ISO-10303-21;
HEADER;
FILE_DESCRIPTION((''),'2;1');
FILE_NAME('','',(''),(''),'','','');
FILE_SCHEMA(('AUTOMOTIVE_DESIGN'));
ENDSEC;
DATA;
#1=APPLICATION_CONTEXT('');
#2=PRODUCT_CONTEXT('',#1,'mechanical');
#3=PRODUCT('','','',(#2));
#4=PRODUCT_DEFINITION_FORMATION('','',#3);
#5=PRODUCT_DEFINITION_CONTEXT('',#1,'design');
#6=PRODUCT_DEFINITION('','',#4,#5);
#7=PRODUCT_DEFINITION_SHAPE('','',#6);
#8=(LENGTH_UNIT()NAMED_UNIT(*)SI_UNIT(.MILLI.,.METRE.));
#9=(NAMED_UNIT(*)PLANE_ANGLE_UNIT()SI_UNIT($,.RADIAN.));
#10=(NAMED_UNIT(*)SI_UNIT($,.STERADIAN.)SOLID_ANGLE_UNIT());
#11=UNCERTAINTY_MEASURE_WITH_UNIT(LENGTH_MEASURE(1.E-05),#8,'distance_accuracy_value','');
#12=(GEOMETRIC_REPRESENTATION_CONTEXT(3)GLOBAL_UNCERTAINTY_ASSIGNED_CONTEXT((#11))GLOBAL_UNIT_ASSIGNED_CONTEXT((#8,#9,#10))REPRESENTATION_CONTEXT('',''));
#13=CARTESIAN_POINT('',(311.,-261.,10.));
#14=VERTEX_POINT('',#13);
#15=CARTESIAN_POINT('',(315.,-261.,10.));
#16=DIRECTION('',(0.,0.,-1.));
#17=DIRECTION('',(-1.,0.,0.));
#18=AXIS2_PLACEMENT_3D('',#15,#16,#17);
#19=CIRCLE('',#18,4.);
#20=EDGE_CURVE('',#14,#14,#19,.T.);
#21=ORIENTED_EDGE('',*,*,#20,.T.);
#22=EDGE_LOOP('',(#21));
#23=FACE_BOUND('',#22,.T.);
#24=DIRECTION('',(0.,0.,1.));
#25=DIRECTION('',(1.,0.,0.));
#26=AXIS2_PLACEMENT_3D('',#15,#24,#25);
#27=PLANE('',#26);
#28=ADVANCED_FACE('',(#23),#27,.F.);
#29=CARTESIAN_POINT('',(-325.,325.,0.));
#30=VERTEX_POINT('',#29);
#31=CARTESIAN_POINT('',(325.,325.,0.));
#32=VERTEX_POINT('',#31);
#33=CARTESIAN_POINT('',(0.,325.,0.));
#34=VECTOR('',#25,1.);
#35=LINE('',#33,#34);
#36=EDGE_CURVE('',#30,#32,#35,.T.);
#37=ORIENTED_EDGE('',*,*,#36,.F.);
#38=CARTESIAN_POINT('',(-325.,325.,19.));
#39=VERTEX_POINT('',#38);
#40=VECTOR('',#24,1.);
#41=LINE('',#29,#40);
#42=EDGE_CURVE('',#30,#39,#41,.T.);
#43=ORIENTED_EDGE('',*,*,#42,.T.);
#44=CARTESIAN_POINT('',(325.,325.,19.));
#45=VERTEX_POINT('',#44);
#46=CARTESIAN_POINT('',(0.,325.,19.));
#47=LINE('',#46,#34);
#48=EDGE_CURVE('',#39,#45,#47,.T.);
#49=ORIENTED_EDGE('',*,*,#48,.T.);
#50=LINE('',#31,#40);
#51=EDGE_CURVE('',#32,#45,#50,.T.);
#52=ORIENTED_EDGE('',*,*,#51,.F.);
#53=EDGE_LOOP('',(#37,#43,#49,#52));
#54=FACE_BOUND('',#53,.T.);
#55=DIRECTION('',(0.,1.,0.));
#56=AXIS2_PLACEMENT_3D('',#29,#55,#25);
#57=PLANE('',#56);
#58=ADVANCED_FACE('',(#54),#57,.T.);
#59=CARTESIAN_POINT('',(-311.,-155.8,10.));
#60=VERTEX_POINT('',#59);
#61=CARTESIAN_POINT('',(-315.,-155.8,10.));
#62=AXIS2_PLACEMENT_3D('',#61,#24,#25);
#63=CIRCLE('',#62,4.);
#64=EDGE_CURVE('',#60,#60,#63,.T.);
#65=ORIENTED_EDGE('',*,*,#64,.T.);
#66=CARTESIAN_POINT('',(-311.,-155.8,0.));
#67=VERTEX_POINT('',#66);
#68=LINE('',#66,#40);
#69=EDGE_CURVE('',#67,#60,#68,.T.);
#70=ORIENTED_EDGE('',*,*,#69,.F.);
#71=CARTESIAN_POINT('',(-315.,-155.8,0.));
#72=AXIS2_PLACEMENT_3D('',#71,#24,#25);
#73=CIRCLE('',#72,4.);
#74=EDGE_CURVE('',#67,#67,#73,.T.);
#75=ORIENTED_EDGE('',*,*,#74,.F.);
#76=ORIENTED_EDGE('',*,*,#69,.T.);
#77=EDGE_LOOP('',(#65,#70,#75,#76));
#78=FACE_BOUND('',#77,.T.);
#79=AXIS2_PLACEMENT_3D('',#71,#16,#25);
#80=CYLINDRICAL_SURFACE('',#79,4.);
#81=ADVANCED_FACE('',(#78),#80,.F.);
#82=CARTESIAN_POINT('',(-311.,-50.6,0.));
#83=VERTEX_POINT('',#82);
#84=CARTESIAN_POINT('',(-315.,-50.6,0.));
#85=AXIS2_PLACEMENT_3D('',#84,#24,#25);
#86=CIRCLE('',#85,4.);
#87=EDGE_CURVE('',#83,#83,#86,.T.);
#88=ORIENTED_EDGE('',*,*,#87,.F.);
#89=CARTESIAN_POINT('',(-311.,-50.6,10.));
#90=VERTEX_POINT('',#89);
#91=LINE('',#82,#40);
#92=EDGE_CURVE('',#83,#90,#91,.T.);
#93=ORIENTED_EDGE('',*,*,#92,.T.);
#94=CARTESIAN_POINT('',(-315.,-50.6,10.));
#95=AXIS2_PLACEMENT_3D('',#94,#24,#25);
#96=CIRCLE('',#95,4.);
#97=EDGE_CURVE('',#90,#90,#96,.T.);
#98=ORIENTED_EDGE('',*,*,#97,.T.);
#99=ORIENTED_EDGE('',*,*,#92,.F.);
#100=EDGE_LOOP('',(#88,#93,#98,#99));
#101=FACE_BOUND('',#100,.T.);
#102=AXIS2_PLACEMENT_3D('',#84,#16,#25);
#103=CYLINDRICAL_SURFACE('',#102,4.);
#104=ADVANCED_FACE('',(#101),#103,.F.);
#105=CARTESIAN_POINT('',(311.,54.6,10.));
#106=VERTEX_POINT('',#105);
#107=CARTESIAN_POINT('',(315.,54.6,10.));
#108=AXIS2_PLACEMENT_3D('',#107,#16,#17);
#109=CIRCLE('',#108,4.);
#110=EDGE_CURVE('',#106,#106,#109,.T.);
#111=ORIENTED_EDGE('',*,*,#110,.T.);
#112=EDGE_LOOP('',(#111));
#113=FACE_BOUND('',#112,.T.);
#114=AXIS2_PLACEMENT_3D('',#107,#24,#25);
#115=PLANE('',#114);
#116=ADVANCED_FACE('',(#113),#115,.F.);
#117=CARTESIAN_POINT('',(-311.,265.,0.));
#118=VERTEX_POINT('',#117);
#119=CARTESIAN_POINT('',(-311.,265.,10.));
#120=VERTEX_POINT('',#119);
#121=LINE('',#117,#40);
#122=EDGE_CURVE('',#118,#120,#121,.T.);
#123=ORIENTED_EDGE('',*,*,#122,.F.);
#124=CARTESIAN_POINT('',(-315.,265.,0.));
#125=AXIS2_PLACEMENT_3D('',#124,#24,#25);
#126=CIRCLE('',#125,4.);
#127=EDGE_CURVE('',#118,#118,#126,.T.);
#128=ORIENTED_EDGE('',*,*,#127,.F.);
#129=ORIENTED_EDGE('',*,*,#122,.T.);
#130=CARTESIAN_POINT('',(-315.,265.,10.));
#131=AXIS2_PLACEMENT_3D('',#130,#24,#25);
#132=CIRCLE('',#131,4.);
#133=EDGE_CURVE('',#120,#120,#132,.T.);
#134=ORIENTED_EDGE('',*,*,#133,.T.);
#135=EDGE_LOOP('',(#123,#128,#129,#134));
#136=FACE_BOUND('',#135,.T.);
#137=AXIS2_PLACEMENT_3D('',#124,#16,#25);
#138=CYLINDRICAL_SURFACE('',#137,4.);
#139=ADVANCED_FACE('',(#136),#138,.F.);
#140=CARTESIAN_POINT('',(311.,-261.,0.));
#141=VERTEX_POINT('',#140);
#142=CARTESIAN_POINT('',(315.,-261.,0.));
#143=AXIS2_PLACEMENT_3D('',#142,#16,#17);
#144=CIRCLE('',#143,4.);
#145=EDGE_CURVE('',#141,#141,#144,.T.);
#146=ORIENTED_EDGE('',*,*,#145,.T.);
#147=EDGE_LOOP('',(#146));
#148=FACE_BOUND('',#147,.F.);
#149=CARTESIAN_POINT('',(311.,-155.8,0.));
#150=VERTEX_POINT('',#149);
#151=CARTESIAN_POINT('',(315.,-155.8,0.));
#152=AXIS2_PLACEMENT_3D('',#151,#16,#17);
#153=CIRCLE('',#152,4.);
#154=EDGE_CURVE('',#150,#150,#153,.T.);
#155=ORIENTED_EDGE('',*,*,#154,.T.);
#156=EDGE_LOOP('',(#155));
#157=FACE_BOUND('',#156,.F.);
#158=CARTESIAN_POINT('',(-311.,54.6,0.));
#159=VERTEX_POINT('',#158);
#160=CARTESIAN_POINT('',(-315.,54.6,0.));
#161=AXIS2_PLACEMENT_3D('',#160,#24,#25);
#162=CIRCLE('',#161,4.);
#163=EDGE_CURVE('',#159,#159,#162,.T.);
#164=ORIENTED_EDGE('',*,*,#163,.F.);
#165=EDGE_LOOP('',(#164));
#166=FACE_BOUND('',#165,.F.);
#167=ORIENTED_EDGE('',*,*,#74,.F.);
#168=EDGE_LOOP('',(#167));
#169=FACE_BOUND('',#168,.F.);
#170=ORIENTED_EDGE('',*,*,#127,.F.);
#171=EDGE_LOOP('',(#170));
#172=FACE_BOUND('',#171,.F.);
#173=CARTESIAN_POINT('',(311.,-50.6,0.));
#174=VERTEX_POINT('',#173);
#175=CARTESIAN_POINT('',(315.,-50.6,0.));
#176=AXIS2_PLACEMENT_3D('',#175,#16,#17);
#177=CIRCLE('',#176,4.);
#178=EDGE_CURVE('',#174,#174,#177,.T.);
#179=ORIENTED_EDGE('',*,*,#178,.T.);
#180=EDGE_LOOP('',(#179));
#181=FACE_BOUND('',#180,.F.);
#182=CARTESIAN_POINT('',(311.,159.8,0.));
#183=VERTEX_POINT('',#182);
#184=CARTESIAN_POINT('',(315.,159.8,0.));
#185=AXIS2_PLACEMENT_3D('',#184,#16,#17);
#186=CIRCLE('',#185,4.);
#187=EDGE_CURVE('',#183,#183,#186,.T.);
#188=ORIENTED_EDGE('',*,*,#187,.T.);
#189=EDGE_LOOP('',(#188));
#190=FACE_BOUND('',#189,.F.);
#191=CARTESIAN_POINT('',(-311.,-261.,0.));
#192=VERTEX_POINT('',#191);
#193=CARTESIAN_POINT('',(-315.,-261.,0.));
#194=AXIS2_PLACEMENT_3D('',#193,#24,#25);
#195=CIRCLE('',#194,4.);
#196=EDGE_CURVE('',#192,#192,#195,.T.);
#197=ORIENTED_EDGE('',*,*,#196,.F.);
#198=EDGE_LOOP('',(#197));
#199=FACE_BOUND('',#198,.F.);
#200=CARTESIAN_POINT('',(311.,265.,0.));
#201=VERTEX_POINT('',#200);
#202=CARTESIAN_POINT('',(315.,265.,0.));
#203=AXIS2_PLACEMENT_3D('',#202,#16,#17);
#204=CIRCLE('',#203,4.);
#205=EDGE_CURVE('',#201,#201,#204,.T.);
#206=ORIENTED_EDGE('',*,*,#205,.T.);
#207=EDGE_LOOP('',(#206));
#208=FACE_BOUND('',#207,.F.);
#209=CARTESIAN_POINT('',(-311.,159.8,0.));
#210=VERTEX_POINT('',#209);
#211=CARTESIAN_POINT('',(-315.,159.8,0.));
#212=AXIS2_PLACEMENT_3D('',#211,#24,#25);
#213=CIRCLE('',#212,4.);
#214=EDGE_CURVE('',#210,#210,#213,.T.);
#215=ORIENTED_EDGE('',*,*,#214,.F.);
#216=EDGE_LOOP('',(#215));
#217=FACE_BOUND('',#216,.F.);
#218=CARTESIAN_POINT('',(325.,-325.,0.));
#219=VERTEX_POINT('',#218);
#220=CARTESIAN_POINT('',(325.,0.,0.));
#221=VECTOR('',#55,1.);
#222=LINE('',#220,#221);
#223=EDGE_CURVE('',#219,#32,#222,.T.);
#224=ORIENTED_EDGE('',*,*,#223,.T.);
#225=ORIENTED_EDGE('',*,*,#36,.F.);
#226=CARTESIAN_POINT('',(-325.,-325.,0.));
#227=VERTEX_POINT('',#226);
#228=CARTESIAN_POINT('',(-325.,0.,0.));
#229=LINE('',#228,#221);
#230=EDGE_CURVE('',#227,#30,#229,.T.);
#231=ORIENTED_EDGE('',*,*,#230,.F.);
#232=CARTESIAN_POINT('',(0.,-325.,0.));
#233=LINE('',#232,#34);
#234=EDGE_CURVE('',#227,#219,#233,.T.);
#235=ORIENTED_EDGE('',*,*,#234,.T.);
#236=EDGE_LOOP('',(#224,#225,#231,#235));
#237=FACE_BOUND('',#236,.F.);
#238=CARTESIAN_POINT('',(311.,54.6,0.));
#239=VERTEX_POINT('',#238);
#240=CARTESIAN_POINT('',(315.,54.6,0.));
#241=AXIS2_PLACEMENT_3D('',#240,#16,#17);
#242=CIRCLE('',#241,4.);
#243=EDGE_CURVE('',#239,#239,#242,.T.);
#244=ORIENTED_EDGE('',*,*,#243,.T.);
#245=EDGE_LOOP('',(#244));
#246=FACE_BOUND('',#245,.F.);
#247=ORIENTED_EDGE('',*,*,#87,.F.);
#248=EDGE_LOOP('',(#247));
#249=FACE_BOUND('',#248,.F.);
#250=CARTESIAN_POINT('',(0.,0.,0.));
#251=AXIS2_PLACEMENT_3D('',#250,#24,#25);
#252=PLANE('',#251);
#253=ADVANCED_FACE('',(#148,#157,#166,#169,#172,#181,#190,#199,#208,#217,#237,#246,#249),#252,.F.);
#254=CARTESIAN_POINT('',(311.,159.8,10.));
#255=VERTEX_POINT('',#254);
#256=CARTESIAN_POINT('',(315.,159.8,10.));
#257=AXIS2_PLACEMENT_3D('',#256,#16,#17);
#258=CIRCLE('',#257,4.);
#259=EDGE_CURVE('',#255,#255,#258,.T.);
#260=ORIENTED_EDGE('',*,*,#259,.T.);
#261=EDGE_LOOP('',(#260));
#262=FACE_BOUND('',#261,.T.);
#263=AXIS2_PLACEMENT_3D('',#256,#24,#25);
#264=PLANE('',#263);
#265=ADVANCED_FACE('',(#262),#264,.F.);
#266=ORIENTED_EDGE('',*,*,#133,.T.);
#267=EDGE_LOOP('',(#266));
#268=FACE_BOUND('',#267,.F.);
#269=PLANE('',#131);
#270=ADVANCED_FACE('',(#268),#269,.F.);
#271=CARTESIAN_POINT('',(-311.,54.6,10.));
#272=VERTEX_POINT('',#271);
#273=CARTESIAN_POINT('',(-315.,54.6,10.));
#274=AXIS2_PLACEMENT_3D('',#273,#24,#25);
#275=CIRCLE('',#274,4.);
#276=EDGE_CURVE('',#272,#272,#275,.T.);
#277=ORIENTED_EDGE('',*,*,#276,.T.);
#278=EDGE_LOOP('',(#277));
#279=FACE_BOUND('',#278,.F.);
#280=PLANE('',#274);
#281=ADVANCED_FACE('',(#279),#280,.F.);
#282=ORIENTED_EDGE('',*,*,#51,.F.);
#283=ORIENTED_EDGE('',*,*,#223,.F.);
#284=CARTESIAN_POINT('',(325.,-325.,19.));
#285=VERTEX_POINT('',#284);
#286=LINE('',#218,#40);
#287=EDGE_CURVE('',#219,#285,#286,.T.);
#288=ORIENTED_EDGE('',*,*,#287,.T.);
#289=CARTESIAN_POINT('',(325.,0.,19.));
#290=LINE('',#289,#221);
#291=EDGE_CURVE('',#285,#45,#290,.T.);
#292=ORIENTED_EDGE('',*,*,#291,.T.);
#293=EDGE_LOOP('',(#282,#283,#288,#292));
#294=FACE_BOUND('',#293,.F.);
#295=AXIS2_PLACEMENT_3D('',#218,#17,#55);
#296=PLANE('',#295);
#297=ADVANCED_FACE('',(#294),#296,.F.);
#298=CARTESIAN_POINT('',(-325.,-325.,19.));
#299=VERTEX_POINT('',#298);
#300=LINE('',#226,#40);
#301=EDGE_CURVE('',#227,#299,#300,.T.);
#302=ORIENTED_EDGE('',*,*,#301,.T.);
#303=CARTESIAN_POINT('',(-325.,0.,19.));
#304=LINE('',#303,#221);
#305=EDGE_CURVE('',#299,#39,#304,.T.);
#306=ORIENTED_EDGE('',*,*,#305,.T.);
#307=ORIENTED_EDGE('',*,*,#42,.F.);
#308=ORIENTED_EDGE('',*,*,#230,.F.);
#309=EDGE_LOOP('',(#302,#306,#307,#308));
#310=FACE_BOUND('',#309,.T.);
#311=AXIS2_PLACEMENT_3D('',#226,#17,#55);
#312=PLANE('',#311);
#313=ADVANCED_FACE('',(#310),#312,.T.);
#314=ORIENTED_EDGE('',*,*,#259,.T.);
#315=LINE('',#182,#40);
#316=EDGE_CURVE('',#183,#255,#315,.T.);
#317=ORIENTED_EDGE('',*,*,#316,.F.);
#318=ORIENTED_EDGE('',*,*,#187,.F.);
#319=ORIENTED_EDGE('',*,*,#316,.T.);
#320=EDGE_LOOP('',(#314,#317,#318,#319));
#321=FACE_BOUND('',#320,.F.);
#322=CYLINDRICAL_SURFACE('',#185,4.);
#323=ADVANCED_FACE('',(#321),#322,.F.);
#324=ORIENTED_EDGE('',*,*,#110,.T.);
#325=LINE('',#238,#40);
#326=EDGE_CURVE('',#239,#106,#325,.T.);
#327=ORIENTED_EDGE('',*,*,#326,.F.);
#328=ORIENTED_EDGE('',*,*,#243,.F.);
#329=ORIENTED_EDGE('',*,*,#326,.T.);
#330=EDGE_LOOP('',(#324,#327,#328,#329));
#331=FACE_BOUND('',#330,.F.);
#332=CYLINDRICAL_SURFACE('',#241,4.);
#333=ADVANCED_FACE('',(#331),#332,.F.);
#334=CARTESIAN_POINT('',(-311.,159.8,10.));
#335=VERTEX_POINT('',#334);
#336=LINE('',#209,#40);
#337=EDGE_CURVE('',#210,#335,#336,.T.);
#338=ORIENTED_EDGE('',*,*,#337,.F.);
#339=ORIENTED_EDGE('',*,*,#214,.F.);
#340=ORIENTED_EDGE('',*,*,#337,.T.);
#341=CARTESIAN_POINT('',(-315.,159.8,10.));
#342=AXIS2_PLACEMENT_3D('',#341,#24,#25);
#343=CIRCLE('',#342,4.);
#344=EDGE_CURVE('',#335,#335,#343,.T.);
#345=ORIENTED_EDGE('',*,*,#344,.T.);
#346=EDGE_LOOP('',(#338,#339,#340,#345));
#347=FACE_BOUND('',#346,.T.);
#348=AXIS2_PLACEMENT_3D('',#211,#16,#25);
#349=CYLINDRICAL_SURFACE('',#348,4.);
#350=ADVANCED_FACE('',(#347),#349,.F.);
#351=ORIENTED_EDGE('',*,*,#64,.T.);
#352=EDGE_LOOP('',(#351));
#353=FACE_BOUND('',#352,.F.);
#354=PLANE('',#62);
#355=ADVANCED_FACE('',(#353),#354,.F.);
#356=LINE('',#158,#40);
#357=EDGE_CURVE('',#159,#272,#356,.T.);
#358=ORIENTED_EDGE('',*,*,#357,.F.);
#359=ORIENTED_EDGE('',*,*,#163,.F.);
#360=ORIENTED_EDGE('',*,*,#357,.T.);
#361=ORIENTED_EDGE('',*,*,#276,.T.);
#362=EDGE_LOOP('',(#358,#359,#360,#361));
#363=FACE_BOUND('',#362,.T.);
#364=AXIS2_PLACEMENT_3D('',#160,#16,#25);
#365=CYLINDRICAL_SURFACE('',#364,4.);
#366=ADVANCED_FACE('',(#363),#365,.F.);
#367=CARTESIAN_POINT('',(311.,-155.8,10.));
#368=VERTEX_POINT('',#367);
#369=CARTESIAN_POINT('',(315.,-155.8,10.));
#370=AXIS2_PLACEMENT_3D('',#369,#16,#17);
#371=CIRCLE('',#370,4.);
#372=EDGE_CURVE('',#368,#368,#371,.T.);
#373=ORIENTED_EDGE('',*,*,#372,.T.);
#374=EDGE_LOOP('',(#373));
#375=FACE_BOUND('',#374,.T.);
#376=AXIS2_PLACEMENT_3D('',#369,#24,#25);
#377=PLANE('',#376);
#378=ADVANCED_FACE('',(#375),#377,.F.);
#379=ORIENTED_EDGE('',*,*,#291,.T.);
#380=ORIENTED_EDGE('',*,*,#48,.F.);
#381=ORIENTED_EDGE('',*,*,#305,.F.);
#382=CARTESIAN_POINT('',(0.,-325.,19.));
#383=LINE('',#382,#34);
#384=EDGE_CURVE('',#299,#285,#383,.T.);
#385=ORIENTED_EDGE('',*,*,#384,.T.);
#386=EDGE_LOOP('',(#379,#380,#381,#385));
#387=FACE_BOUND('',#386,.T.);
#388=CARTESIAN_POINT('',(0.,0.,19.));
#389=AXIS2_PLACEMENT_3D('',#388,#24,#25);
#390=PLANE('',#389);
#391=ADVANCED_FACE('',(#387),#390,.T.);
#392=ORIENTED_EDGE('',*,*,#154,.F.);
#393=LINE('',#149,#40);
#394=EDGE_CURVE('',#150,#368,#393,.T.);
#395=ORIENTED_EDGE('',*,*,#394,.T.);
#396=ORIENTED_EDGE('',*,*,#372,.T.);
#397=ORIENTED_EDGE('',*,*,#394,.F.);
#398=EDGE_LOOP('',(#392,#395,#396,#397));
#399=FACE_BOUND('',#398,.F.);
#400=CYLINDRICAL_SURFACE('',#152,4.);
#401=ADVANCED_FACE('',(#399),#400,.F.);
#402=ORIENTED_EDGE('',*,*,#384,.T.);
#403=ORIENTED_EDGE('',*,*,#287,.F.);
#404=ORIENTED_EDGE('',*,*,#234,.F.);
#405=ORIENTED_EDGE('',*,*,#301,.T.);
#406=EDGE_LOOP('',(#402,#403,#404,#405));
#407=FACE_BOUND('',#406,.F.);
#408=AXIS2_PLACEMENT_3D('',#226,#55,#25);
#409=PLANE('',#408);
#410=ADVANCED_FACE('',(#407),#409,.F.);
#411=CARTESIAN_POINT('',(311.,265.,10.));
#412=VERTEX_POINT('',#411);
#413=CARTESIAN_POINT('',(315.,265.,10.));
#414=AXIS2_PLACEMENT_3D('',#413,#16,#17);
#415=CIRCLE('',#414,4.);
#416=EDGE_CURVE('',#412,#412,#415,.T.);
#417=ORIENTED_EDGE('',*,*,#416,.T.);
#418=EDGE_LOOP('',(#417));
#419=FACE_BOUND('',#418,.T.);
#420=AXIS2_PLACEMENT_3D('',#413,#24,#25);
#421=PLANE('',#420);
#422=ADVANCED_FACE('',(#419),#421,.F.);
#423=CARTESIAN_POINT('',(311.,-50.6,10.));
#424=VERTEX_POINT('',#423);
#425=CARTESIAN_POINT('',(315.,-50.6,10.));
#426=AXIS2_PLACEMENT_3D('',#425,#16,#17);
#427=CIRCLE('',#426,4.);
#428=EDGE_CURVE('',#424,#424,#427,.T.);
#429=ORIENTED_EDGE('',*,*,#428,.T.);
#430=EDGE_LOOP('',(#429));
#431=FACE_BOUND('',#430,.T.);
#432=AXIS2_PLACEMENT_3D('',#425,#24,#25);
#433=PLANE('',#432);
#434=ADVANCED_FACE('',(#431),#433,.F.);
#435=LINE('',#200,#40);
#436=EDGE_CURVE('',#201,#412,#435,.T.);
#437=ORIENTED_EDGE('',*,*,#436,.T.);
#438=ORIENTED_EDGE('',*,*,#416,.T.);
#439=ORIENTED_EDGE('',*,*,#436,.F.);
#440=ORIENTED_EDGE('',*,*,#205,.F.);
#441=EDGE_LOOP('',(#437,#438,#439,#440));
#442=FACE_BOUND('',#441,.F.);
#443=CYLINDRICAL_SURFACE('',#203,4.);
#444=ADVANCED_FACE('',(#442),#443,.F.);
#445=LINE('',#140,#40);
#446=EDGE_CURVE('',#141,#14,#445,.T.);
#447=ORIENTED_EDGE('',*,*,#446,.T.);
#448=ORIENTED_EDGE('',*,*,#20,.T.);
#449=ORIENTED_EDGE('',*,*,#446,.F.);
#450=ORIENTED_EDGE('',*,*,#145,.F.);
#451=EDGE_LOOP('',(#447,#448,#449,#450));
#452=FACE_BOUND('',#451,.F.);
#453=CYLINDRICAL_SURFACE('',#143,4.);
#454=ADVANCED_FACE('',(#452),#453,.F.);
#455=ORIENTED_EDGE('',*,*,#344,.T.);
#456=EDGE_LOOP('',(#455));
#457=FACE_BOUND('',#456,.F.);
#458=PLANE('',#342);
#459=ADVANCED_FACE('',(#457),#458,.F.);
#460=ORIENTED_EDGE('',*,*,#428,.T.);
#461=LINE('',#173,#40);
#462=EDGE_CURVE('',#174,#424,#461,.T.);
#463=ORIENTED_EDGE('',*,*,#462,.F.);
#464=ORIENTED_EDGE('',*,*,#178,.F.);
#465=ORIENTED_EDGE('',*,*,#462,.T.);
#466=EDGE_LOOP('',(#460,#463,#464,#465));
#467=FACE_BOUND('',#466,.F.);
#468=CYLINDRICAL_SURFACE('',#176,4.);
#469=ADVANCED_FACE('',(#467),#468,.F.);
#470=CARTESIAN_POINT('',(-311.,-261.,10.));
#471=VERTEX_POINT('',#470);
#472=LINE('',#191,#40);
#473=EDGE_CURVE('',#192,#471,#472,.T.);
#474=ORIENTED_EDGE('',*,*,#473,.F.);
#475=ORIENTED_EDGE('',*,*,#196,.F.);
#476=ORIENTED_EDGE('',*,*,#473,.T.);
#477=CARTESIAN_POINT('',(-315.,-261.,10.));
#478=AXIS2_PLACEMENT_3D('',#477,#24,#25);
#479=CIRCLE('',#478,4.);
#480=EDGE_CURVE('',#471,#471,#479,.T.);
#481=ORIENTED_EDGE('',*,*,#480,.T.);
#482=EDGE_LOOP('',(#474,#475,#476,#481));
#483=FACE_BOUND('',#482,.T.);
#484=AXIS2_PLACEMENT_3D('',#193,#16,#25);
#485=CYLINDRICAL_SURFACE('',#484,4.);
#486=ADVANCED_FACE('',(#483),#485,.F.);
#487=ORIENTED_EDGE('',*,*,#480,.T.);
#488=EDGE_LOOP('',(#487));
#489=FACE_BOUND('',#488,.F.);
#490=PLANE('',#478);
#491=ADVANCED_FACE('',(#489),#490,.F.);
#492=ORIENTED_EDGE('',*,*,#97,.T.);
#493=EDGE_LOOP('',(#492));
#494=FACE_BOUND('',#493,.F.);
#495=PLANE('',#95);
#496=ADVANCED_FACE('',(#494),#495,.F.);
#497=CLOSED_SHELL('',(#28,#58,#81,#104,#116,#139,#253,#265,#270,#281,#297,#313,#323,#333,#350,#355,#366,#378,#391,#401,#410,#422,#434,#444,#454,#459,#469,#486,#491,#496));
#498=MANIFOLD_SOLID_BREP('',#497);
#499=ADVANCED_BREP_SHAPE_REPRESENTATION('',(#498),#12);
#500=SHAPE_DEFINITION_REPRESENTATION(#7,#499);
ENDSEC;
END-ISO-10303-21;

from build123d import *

# Parameters (mm, degrees)
F0_W     = 650
F0_H     = 650
F0_R     = 4
F1_DEPTH = 19
F2_DEPTH = 10


# Not quite as in the source:
# - a pattern or mirror of a feature is missing from the dataset's text; its kind, count and spacing are read off the source's solid


with BuildPart() as f1:
    # F0 (on Top) → F1 (new body)
    with BuildSketch(Plane.XY):
        Rectangle(F0_W, F0_H)
        with Locations((-315, -261)):
            Circle(F0_R, mode=Mode.SUBTRACT)
        with Locations((-315, -155.8)):
            Circle(F0_R, mode=Mode.SUBTRACT)
        with Locations((-315, -50.6)):
            Circle(F0_R, mode=Mode.SUBTRACT)
        with Locations((-315, 54.6)):
            Circle(F0_R, mode=Mode.SUBTRACT)
        with Locations((-315, 159.8)):
            Circle(F0_R, mode=Mode.SUBTRACT)
        with Locations((-315, 265)):
            Circle(F0_R, mode=Mode.SUBTRACT)
        with Locations((-315, 265)):
            Circle(F0_R)
        with Locations((-315, 159.8)):
            Circle(F0_R)
        with Locations((-315, 54.6)):
            Circle(F0_R)
        with Locations((-315, -50.6)):
            Circle(F0_R)
        with Locations((-315, -155.8)):
            Circle(F0_R)
        with Locations((-315, -261)):
            Circle(F0_R)
    extrude(amount=F1_DEPTH)

    # F0 (on Top) → F2 (cut)
    with BuildSketch(Plane.XY):
        with Locations((-315, 265)):
            Circle(F0_R)
        with Locations((-315, 159.8)):
            Circle(F0_R)
        with Locations((-315, 54.6)):
            Circle(F0_R)
        with Locations((-315, -50.6)):
            Circle(F0_R)
        with Locations((-315, -155.8)):
            Circle(F0_R)
        with Locations((-315, -261)):
            Circle(F0_R)
    f2 = extrude(amount=F2_DEPTH, mode=Mode.SUBTRACT)

    # F2_copies: F2 across plane
    add(f2.mirror(Plane(origin=(0, 0, 0), x_dir=(0, 0, 1), z_dir=(1, 0, 0))), mode=Mode.SUBTRACT)


solid = f1.part
